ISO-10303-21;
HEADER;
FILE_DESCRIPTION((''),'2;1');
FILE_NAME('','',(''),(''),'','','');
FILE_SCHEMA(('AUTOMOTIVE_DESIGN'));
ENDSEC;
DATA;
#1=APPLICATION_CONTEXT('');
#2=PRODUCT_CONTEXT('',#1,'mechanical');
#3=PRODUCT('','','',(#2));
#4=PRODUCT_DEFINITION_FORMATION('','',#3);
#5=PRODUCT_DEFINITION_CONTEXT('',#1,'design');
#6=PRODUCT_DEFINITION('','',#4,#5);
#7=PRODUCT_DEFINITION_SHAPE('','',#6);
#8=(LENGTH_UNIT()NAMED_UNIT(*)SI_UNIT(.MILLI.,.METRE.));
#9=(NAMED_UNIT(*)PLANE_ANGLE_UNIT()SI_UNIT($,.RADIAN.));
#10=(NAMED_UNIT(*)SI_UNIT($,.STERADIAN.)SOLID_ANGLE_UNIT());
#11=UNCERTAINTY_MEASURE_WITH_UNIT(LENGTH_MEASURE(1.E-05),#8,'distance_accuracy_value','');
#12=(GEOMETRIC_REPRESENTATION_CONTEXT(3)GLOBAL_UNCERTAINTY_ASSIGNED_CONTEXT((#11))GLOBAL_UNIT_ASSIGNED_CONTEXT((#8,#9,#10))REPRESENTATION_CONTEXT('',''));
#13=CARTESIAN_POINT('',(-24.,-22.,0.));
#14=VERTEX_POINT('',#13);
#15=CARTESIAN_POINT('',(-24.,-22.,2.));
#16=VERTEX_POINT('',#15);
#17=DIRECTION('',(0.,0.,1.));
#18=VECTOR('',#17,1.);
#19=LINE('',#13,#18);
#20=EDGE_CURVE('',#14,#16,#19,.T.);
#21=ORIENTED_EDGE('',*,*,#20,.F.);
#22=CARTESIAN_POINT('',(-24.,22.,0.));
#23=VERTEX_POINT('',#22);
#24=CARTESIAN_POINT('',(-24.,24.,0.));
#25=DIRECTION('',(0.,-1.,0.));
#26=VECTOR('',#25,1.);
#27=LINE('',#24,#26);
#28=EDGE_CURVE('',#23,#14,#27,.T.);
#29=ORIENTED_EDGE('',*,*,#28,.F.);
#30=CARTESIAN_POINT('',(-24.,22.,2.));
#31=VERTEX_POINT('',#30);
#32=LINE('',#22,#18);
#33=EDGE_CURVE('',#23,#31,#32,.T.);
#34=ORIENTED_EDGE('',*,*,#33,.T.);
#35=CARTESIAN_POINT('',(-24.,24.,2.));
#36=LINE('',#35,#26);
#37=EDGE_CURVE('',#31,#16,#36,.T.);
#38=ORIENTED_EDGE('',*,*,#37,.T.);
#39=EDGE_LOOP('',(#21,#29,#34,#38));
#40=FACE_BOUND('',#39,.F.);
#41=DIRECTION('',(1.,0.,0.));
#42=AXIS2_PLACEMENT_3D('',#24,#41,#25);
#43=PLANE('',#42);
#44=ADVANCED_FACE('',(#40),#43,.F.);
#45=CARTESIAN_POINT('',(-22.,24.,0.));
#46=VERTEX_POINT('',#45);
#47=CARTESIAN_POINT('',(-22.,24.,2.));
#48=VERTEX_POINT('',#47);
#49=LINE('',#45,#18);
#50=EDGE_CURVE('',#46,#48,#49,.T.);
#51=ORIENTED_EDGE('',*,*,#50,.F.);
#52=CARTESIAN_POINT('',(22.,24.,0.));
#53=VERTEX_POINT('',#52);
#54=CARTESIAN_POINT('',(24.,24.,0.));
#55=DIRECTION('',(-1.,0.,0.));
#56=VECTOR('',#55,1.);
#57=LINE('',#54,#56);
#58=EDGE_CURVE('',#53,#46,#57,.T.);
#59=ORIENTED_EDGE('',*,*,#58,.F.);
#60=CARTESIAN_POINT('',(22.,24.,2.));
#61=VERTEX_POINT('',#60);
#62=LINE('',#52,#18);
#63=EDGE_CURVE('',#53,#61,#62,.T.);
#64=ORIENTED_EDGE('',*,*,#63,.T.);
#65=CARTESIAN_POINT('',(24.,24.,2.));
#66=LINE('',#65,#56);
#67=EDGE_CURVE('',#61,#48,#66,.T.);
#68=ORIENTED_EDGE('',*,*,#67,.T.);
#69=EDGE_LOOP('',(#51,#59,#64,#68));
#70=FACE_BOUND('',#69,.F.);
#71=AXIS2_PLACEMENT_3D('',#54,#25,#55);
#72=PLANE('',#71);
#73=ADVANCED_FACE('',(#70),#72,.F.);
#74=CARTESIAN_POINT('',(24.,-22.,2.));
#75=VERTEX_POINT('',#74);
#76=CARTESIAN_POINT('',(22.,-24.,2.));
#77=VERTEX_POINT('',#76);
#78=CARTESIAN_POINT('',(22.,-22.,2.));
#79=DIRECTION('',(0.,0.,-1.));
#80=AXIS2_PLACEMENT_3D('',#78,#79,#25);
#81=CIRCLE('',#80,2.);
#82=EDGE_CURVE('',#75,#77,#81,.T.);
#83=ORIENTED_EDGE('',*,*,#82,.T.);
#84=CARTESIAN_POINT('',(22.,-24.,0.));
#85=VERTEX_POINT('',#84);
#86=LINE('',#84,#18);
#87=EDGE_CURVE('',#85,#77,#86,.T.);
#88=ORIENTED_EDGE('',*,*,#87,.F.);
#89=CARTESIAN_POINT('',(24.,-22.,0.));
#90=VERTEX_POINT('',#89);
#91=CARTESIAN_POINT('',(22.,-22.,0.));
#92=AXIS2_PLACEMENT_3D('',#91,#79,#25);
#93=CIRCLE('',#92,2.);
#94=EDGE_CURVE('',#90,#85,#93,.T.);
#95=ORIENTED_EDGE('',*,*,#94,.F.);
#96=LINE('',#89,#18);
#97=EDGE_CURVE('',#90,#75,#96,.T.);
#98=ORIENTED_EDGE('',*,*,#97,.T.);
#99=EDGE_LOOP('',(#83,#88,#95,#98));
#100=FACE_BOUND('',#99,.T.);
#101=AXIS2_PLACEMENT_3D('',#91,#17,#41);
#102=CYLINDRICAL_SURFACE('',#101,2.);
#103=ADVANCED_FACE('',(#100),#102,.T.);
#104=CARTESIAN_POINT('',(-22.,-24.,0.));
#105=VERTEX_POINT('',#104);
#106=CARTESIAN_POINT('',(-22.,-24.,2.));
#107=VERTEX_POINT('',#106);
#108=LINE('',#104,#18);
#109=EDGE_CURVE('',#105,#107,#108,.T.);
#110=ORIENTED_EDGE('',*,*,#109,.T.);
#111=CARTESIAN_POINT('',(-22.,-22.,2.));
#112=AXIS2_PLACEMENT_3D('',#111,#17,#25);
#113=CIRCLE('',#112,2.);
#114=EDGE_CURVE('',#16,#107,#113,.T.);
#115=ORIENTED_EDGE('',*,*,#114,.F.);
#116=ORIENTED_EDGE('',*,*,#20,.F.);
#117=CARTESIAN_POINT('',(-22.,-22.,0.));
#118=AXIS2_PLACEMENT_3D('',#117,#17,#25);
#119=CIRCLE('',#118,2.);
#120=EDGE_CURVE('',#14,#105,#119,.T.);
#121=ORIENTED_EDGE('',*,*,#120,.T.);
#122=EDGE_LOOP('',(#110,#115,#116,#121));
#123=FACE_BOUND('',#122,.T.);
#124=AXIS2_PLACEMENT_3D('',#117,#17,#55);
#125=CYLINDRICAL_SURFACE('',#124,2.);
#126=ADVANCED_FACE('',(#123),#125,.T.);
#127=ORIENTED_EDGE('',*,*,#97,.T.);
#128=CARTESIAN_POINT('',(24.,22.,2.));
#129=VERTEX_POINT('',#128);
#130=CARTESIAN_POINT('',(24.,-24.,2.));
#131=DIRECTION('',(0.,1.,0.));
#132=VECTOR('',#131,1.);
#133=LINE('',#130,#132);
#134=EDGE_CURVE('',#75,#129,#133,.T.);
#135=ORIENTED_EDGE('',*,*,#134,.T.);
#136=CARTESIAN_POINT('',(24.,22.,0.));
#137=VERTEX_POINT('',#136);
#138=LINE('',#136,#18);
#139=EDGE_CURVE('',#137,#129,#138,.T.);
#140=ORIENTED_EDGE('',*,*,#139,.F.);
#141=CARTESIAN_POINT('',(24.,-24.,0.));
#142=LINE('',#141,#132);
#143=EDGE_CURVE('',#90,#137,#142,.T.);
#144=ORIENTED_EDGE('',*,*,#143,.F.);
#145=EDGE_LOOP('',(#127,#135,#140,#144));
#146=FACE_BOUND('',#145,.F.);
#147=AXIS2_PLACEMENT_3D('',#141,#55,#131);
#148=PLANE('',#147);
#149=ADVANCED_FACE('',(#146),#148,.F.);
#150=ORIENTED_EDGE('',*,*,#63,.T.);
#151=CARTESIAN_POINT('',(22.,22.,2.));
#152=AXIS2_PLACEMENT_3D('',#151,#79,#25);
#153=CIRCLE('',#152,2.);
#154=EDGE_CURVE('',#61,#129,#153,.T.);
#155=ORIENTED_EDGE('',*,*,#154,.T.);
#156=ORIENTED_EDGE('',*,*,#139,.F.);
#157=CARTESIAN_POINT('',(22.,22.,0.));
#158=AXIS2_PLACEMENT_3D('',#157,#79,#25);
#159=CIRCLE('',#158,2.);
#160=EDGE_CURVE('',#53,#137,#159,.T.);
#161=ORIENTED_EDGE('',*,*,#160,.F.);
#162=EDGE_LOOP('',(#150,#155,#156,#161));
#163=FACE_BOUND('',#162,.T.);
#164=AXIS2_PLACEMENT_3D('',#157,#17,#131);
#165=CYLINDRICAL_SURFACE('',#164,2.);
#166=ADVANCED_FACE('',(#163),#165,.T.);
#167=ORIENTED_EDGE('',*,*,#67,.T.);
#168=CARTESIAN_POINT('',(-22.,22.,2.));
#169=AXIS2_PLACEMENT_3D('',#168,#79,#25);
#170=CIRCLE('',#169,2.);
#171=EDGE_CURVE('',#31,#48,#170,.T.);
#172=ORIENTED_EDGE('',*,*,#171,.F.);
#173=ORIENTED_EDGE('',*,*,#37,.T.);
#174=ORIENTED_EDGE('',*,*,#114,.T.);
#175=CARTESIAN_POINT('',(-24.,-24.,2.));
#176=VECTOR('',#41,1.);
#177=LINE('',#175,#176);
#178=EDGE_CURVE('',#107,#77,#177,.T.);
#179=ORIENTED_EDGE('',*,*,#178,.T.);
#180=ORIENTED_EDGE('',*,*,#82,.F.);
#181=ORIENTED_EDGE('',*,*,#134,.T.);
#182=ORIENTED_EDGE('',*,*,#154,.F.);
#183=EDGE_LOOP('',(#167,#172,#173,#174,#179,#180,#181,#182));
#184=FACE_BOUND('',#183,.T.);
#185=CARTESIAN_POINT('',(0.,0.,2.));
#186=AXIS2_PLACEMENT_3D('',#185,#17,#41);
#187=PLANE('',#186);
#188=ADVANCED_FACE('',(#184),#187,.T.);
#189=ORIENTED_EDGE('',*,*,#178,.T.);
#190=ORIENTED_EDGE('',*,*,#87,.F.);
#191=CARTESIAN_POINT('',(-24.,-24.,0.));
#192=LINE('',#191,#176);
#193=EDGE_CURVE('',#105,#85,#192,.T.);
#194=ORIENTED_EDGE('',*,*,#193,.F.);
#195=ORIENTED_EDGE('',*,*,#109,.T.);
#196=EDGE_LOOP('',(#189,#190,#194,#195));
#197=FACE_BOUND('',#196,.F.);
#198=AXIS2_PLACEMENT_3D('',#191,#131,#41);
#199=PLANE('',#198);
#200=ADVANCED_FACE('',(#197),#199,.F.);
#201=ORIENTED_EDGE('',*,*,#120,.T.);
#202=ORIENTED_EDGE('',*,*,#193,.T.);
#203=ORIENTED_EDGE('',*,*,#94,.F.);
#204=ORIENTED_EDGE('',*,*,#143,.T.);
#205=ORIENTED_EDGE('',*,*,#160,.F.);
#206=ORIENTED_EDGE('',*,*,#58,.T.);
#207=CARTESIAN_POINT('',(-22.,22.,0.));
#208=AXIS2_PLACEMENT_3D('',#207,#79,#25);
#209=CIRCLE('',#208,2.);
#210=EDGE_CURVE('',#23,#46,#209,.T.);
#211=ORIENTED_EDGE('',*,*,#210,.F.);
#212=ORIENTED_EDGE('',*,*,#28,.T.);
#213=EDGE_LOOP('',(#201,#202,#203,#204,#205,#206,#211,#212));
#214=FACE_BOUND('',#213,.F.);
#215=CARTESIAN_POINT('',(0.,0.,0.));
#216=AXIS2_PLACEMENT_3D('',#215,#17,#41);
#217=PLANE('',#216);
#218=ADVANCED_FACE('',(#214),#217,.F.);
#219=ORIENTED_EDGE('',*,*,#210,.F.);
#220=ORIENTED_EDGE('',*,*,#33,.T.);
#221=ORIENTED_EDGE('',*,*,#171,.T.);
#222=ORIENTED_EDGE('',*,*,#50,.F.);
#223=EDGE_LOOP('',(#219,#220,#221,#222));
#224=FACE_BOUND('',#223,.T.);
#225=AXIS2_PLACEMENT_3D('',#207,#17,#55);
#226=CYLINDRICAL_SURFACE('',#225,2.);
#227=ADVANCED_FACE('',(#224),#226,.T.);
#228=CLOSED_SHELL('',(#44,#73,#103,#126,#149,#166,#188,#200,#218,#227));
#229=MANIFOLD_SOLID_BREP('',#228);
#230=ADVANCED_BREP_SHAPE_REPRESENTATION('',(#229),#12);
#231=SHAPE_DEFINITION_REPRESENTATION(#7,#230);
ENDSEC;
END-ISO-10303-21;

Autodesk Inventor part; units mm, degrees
ref_plane "YZ Plane" through (0, 0, 0) normal (1, 0, 0) x (0, 1, 0)
ref_plane "XZ Plane" through (0, 0, 0) normal (0, 1, 0) x (-1, 0, 0)
ref_plane "XY Plane" through (0, 0, 0) normal (0, 0, 1) x (1, 0, 0)
sketch "Sketch1" plane through (0, 0, 0) normal (0, 0, 1) x (1, 0, 0)
  line L0 (-24, -24) -> (24, -24)
  line L1 (24, -24) -> (24, 24)
  line L2 (24, 24) -> (-24, 24)
  line L3 (-24, 24) -> (-24, -24)
  line L4 (-24, -24) -> (24, 24) construction
  line L5 (24, -24) -> (-24, 24) construction
  point P0 (0, 0)
  dimension "d154" = 48
  dimension "d155" = 48
extrude "Plate5" add sketch "Sketch1" along normal blind 2
fillet "Corner Round1" radius 2 4 edges at (24, 24, 1) (-24, 24, 1) (-24, -24, 1) (24, -24, 1)
properties part number "TKS 3526 FDS way cup" material "Stainless Steel"
